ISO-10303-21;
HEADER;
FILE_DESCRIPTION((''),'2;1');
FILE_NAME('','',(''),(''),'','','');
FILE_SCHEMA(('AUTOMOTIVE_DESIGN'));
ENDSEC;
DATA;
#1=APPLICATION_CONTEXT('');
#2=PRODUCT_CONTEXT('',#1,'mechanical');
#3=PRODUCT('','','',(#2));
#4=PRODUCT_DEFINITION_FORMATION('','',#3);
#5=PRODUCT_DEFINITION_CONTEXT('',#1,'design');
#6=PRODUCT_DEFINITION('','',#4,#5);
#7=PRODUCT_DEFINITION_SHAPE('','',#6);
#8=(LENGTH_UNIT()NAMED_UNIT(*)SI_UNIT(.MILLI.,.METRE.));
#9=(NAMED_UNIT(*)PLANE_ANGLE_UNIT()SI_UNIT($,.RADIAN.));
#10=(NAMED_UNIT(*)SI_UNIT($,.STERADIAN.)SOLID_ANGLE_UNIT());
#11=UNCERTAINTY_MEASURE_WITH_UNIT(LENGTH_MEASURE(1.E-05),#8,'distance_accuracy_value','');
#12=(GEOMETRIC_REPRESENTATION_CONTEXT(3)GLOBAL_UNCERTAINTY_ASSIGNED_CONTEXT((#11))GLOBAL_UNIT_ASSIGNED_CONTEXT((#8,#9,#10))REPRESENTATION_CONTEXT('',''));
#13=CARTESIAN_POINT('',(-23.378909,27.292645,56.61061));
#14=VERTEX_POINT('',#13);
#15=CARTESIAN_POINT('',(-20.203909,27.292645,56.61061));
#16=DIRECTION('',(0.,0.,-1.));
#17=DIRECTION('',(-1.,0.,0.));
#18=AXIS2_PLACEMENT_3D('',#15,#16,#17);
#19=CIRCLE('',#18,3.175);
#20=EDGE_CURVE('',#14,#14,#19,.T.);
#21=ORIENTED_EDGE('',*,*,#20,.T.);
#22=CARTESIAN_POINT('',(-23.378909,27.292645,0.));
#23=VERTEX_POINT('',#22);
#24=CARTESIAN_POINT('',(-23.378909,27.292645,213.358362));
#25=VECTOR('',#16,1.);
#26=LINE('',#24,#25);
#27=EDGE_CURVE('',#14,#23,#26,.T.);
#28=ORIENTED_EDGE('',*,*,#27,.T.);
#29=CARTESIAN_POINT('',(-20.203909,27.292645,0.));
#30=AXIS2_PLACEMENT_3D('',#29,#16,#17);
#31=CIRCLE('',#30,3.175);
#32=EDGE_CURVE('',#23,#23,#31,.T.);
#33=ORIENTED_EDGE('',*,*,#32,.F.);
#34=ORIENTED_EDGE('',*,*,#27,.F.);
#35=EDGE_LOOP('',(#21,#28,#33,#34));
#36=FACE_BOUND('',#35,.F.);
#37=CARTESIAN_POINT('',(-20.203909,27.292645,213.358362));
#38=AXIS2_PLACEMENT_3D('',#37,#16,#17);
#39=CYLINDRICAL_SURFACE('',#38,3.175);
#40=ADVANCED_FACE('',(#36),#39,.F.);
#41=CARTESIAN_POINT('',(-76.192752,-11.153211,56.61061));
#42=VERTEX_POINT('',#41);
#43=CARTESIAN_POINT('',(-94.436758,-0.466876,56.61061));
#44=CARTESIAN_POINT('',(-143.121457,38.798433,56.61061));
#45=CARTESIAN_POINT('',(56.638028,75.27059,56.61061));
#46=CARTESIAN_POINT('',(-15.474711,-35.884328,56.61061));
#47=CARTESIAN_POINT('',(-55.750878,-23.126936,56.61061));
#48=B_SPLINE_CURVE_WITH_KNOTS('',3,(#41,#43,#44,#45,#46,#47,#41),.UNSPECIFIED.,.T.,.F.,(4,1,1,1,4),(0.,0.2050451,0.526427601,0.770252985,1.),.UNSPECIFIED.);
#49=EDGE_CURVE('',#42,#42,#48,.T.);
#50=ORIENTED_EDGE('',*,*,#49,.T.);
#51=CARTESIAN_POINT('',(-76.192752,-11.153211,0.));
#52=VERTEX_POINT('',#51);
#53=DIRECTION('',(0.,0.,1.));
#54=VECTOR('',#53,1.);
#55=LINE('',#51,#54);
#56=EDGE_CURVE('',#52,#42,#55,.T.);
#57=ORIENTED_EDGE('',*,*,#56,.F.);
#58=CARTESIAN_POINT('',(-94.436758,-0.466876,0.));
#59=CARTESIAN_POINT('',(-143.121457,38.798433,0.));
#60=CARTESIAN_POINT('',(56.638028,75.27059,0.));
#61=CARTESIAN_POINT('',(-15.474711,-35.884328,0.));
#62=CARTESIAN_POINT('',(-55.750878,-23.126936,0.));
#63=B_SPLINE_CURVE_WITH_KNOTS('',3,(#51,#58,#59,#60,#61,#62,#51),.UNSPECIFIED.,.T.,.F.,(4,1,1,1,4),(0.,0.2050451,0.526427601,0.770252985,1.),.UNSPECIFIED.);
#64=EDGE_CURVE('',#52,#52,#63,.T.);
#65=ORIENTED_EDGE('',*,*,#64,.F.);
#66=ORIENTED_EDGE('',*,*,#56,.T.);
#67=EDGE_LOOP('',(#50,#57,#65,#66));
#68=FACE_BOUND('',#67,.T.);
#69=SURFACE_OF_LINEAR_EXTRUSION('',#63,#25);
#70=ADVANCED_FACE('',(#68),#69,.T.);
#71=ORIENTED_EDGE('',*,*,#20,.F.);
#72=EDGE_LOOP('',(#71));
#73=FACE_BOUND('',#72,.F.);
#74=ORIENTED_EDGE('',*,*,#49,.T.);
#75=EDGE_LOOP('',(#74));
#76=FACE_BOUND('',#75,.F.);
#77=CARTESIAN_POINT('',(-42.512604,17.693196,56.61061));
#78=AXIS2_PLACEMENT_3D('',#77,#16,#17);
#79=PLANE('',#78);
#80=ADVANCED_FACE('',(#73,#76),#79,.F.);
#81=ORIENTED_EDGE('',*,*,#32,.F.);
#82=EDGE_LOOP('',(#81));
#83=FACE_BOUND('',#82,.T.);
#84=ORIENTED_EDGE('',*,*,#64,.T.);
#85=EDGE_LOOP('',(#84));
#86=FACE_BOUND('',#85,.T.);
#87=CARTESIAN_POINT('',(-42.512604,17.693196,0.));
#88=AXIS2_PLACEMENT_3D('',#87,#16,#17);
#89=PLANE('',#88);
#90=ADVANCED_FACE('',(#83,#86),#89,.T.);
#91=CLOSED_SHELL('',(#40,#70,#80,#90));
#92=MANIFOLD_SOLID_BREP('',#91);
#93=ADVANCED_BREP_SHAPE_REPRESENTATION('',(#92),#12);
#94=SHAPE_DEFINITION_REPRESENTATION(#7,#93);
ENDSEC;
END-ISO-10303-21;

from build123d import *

# Parameters (mm, degrees)
F1_DEPTH = 56.61061
F4_D     = 6.35


# Not quite as in the source:
# - the program builds the solid bodies; features that only make, move or delete a surface that nothing else refers to are left out


with BuildPart() as f1:
    # F0 (on Top) → F1 (new body)
    with BuildSketch(Plane.XY):
        with BuildLine():
            add(Edge.make_bspline(
                [(-76.1927515268, -11.1532108858), (-94.4367577585, -0.4668757066), (-143.1214573776, 38.7984332094), (56.6380279203, 75.270590056), (-15.4747114675, -35.8843276344), (-55.7508781473, -23.1269357273), (-76.1927515268, -11.1532108858)],
                knots=[0, 0, 0, 0, 0.2050451004, 0.5264276013, 0.7702529846, 1, 1, 1, 1], degree=3))
        make_face()
    extrude(amount=F1_DEPTH)

    # F4 (through all)
    with Locations(Plane.XY.offset(56.61061)):
        with Locations((-20.2039089054, 27.292644605)):
            Hole(F4_D / 2)


solid = f1.part
